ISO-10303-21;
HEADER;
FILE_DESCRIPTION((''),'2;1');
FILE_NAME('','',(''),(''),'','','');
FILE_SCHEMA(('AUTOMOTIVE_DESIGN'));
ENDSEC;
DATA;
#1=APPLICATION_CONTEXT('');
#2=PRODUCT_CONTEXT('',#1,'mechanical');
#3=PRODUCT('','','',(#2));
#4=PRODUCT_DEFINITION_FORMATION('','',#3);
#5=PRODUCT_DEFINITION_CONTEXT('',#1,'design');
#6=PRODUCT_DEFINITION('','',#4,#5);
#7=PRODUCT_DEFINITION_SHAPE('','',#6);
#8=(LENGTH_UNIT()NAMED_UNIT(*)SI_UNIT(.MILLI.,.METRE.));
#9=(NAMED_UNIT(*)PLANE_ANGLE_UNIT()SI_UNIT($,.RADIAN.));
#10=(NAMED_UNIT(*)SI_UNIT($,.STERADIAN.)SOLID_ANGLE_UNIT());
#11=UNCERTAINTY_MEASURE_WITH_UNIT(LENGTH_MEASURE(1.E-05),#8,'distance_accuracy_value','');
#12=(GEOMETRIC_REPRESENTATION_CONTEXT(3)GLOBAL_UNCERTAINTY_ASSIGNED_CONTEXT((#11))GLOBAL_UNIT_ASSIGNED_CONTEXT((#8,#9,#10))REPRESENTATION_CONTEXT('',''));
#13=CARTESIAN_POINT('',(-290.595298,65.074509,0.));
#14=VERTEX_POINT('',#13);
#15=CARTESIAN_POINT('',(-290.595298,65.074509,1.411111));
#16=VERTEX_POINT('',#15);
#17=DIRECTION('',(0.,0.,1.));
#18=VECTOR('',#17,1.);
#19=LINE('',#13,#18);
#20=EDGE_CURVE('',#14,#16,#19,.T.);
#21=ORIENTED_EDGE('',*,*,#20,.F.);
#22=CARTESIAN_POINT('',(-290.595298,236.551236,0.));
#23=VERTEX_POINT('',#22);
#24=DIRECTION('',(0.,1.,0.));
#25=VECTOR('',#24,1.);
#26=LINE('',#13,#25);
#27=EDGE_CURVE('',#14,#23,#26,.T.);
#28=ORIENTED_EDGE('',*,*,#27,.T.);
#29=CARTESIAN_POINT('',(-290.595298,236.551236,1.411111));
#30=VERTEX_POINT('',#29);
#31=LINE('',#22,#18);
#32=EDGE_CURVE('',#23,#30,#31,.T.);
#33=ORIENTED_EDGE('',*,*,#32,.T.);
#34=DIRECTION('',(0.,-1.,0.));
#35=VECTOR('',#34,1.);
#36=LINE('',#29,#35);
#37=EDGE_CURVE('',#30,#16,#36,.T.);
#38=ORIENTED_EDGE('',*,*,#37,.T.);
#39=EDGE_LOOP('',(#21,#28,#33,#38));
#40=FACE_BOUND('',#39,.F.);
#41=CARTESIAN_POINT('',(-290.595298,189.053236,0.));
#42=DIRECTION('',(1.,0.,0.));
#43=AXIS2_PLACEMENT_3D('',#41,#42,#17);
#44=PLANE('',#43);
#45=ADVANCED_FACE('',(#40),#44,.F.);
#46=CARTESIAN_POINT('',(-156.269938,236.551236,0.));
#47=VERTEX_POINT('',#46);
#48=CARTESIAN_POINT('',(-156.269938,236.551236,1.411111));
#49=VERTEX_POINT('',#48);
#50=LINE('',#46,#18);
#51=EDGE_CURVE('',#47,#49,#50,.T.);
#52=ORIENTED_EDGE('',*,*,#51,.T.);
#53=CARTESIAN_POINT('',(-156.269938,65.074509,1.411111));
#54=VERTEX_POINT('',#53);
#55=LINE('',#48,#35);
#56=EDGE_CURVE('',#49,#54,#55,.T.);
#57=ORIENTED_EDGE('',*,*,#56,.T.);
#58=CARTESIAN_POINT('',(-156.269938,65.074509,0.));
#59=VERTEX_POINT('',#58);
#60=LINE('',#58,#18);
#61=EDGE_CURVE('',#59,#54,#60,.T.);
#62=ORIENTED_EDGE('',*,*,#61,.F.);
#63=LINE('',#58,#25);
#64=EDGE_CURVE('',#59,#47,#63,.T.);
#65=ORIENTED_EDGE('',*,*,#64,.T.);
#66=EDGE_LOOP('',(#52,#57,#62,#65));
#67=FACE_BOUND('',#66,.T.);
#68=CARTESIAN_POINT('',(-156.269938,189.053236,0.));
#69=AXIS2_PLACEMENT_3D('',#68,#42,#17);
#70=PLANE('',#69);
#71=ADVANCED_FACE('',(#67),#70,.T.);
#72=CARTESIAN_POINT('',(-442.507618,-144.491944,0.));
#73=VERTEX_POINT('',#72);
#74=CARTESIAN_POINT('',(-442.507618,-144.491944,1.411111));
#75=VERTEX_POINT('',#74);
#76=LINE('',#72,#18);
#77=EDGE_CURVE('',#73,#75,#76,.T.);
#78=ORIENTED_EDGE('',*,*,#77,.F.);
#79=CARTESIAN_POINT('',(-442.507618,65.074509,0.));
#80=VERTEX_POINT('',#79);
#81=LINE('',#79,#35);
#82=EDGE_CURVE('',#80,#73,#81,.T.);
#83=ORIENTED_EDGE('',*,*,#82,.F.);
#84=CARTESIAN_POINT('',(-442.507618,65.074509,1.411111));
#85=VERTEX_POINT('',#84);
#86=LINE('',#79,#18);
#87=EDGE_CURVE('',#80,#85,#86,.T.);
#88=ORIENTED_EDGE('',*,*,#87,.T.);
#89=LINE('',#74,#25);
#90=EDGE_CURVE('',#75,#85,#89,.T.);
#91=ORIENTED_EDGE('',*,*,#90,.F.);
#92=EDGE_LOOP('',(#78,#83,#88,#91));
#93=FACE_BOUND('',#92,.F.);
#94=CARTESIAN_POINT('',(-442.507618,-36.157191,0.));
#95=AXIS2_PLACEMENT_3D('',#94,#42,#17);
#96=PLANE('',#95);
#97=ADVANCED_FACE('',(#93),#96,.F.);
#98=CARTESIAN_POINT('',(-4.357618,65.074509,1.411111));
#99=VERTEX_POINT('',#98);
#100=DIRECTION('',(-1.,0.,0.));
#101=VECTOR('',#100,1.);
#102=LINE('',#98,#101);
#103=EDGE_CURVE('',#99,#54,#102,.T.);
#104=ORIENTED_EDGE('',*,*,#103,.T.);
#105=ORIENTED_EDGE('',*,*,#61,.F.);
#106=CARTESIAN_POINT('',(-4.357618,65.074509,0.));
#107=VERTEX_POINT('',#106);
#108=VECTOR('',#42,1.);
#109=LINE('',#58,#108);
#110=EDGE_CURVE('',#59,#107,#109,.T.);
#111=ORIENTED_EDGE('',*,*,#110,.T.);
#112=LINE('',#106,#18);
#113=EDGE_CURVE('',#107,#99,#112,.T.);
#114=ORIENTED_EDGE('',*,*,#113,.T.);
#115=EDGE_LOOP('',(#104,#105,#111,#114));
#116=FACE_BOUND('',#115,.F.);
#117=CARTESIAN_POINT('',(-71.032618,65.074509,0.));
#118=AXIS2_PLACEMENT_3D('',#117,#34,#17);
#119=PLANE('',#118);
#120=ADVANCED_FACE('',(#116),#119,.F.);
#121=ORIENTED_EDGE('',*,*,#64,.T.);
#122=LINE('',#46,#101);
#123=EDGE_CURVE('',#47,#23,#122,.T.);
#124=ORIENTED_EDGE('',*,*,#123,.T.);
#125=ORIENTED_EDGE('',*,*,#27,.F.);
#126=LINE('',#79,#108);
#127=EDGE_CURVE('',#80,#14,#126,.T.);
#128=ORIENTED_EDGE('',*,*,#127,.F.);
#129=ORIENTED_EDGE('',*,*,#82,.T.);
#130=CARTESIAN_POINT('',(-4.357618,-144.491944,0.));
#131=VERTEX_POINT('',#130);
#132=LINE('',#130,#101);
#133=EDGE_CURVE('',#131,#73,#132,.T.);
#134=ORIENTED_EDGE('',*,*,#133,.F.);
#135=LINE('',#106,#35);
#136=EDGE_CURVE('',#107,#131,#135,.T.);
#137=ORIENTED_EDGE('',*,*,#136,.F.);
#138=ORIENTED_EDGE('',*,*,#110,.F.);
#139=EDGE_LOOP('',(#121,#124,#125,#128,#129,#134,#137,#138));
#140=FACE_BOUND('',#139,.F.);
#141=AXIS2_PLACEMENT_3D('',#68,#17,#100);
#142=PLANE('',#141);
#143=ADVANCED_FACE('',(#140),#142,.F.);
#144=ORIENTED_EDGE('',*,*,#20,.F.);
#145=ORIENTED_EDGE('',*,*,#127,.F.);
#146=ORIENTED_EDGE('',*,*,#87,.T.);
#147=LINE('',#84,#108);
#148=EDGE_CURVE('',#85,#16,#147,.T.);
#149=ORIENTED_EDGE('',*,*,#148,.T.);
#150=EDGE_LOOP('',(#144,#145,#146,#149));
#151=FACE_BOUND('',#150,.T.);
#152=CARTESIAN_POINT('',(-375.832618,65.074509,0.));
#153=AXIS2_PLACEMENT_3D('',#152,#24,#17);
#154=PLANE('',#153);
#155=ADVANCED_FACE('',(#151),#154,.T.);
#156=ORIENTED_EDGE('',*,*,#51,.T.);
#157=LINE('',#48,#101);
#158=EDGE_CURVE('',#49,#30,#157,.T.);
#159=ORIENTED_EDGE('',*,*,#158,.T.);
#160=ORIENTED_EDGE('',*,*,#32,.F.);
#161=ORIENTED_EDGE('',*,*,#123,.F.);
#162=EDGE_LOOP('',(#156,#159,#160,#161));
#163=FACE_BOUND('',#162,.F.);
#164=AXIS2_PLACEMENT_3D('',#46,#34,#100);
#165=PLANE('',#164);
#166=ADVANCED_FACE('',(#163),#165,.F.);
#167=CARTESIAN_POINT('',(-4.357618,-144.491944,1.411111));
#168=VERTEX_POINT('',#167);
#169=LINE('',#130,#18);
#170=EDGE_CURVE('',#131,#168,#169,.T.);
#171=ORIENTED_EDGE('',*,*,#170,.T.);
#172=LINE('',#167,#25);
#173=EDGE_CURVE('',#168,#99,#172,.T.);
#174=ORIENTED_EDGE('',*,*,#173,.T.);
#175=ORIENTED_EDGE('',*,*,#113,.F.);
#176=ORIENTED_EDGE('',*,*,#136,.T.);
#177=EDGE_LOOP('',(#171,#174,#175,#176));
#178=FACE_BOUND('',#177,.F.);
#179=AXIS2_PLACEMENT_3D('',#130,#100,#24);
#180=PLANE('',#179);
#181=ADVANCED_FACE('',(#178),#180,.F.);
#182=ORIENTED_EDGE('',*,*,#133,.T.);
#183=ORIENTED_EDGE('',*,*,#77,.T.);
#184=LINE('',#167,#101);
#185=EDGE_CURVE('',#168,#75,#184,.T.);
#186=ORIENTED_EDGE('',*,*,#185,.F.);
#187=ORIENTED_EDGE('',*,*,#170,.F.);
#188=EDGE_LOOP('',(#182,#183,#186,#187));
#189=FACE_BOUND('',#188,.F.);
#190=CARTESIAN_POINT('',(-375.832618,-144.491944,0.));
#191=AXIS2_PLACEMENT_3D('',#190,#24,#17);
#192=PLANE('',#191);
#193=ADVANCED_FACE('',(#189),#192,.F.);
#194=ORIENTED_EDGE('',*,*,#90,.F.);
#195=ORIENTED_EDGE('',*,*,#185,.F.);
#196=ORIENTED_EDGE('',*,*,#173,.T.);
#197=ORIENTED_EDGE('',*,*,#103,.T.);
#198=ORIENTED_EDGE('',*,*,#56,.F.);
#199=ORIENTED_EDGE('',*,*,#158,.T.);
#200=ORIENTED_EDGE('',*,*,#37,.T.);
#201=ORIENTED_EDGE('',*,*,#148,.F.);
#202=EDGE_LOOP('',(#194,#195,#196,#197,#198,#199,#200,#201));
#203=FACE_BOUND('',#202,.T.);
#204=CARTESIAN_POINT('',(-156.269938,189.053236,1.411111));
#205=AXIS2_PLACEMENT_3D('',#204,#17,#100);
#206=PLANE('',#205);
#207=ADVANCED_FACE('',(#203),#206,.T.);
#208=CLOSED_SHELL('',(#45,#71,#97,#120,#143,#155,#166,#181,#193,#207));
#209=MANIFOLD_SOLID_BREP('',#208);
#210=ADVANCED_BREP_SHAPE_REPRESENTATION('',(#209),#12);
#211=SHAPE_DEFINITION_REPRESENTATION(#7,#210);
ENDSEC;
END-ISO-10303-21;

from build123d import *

# Parameters (mm, degrees)
F1_DEPTH = 1.4111111111
F2_DEPTH = 101.2317
F3_DEPTH = 66.675
F4_DEPTH = 66.675
F5_DEPTH = 47.498


# Not quite as in the source:
# - a length typed as a fraction of an inch, garbled in the dataset ("3 / 203.2 mm" for 3/8 in), is restored


with BuildPart() as f1:
    # F0 (on Top) → F1 (new body)
    with BuildSketch(Plane.XY):
        Polygon((-156.2699383586, 189.0532364881), (-290.5952983586, 189.0532364881), (-290.5952983586, -36.1571907997), (-375.8326183586, -36.1571907997), (-375.8326183586, -144.4919435119), (-71.0326183586, -144.4919435119), (-71.0326183586, -36.1571907997), (-156.2699383586, -36.1571907997), align=None)
    extrude(amount=F1_DEPTH)

    # F2 (add): faces of the model
    f2_faces = [f1.faces().sort_by_distance(p)[0] for p in [
        (-333.2139583586, -36.1571907997, 0.7055555556),
        (-113.6512783586, -36.1571907997, 0.7055555556),
    ]]
    extrude(f2_faces, amount=F2_DEPTH)

    # F3 (add): a face of the model
    f3_faces = [f1.faces().sort_by_distance(p)[0] for p in [
        (-71.0326183586, -39.7087171558, 0.7055555556),
    ]]
    extrude(f3_faces, amount=F3_DEPTH)

    # F4 (add): a face of the model
    f4_faces = [f1.faces().sort_by_distance(p)[0] for p in [
        (-375.8326183586, -39.7087171558, 0.7055555556),
    ]]
    extrude(f4_faces, amount=F4_DEPTH)

    # F5 (add): a face of the model
    f5_faces = [f1.faces().sort_by_distance(p)[0] for p in [
        (-223.4326183586, 189.0532364881, 0.7055555556),
    ]]
    extrude(f5_faces, amount=F5_DEPTH)


solid = f1.part
